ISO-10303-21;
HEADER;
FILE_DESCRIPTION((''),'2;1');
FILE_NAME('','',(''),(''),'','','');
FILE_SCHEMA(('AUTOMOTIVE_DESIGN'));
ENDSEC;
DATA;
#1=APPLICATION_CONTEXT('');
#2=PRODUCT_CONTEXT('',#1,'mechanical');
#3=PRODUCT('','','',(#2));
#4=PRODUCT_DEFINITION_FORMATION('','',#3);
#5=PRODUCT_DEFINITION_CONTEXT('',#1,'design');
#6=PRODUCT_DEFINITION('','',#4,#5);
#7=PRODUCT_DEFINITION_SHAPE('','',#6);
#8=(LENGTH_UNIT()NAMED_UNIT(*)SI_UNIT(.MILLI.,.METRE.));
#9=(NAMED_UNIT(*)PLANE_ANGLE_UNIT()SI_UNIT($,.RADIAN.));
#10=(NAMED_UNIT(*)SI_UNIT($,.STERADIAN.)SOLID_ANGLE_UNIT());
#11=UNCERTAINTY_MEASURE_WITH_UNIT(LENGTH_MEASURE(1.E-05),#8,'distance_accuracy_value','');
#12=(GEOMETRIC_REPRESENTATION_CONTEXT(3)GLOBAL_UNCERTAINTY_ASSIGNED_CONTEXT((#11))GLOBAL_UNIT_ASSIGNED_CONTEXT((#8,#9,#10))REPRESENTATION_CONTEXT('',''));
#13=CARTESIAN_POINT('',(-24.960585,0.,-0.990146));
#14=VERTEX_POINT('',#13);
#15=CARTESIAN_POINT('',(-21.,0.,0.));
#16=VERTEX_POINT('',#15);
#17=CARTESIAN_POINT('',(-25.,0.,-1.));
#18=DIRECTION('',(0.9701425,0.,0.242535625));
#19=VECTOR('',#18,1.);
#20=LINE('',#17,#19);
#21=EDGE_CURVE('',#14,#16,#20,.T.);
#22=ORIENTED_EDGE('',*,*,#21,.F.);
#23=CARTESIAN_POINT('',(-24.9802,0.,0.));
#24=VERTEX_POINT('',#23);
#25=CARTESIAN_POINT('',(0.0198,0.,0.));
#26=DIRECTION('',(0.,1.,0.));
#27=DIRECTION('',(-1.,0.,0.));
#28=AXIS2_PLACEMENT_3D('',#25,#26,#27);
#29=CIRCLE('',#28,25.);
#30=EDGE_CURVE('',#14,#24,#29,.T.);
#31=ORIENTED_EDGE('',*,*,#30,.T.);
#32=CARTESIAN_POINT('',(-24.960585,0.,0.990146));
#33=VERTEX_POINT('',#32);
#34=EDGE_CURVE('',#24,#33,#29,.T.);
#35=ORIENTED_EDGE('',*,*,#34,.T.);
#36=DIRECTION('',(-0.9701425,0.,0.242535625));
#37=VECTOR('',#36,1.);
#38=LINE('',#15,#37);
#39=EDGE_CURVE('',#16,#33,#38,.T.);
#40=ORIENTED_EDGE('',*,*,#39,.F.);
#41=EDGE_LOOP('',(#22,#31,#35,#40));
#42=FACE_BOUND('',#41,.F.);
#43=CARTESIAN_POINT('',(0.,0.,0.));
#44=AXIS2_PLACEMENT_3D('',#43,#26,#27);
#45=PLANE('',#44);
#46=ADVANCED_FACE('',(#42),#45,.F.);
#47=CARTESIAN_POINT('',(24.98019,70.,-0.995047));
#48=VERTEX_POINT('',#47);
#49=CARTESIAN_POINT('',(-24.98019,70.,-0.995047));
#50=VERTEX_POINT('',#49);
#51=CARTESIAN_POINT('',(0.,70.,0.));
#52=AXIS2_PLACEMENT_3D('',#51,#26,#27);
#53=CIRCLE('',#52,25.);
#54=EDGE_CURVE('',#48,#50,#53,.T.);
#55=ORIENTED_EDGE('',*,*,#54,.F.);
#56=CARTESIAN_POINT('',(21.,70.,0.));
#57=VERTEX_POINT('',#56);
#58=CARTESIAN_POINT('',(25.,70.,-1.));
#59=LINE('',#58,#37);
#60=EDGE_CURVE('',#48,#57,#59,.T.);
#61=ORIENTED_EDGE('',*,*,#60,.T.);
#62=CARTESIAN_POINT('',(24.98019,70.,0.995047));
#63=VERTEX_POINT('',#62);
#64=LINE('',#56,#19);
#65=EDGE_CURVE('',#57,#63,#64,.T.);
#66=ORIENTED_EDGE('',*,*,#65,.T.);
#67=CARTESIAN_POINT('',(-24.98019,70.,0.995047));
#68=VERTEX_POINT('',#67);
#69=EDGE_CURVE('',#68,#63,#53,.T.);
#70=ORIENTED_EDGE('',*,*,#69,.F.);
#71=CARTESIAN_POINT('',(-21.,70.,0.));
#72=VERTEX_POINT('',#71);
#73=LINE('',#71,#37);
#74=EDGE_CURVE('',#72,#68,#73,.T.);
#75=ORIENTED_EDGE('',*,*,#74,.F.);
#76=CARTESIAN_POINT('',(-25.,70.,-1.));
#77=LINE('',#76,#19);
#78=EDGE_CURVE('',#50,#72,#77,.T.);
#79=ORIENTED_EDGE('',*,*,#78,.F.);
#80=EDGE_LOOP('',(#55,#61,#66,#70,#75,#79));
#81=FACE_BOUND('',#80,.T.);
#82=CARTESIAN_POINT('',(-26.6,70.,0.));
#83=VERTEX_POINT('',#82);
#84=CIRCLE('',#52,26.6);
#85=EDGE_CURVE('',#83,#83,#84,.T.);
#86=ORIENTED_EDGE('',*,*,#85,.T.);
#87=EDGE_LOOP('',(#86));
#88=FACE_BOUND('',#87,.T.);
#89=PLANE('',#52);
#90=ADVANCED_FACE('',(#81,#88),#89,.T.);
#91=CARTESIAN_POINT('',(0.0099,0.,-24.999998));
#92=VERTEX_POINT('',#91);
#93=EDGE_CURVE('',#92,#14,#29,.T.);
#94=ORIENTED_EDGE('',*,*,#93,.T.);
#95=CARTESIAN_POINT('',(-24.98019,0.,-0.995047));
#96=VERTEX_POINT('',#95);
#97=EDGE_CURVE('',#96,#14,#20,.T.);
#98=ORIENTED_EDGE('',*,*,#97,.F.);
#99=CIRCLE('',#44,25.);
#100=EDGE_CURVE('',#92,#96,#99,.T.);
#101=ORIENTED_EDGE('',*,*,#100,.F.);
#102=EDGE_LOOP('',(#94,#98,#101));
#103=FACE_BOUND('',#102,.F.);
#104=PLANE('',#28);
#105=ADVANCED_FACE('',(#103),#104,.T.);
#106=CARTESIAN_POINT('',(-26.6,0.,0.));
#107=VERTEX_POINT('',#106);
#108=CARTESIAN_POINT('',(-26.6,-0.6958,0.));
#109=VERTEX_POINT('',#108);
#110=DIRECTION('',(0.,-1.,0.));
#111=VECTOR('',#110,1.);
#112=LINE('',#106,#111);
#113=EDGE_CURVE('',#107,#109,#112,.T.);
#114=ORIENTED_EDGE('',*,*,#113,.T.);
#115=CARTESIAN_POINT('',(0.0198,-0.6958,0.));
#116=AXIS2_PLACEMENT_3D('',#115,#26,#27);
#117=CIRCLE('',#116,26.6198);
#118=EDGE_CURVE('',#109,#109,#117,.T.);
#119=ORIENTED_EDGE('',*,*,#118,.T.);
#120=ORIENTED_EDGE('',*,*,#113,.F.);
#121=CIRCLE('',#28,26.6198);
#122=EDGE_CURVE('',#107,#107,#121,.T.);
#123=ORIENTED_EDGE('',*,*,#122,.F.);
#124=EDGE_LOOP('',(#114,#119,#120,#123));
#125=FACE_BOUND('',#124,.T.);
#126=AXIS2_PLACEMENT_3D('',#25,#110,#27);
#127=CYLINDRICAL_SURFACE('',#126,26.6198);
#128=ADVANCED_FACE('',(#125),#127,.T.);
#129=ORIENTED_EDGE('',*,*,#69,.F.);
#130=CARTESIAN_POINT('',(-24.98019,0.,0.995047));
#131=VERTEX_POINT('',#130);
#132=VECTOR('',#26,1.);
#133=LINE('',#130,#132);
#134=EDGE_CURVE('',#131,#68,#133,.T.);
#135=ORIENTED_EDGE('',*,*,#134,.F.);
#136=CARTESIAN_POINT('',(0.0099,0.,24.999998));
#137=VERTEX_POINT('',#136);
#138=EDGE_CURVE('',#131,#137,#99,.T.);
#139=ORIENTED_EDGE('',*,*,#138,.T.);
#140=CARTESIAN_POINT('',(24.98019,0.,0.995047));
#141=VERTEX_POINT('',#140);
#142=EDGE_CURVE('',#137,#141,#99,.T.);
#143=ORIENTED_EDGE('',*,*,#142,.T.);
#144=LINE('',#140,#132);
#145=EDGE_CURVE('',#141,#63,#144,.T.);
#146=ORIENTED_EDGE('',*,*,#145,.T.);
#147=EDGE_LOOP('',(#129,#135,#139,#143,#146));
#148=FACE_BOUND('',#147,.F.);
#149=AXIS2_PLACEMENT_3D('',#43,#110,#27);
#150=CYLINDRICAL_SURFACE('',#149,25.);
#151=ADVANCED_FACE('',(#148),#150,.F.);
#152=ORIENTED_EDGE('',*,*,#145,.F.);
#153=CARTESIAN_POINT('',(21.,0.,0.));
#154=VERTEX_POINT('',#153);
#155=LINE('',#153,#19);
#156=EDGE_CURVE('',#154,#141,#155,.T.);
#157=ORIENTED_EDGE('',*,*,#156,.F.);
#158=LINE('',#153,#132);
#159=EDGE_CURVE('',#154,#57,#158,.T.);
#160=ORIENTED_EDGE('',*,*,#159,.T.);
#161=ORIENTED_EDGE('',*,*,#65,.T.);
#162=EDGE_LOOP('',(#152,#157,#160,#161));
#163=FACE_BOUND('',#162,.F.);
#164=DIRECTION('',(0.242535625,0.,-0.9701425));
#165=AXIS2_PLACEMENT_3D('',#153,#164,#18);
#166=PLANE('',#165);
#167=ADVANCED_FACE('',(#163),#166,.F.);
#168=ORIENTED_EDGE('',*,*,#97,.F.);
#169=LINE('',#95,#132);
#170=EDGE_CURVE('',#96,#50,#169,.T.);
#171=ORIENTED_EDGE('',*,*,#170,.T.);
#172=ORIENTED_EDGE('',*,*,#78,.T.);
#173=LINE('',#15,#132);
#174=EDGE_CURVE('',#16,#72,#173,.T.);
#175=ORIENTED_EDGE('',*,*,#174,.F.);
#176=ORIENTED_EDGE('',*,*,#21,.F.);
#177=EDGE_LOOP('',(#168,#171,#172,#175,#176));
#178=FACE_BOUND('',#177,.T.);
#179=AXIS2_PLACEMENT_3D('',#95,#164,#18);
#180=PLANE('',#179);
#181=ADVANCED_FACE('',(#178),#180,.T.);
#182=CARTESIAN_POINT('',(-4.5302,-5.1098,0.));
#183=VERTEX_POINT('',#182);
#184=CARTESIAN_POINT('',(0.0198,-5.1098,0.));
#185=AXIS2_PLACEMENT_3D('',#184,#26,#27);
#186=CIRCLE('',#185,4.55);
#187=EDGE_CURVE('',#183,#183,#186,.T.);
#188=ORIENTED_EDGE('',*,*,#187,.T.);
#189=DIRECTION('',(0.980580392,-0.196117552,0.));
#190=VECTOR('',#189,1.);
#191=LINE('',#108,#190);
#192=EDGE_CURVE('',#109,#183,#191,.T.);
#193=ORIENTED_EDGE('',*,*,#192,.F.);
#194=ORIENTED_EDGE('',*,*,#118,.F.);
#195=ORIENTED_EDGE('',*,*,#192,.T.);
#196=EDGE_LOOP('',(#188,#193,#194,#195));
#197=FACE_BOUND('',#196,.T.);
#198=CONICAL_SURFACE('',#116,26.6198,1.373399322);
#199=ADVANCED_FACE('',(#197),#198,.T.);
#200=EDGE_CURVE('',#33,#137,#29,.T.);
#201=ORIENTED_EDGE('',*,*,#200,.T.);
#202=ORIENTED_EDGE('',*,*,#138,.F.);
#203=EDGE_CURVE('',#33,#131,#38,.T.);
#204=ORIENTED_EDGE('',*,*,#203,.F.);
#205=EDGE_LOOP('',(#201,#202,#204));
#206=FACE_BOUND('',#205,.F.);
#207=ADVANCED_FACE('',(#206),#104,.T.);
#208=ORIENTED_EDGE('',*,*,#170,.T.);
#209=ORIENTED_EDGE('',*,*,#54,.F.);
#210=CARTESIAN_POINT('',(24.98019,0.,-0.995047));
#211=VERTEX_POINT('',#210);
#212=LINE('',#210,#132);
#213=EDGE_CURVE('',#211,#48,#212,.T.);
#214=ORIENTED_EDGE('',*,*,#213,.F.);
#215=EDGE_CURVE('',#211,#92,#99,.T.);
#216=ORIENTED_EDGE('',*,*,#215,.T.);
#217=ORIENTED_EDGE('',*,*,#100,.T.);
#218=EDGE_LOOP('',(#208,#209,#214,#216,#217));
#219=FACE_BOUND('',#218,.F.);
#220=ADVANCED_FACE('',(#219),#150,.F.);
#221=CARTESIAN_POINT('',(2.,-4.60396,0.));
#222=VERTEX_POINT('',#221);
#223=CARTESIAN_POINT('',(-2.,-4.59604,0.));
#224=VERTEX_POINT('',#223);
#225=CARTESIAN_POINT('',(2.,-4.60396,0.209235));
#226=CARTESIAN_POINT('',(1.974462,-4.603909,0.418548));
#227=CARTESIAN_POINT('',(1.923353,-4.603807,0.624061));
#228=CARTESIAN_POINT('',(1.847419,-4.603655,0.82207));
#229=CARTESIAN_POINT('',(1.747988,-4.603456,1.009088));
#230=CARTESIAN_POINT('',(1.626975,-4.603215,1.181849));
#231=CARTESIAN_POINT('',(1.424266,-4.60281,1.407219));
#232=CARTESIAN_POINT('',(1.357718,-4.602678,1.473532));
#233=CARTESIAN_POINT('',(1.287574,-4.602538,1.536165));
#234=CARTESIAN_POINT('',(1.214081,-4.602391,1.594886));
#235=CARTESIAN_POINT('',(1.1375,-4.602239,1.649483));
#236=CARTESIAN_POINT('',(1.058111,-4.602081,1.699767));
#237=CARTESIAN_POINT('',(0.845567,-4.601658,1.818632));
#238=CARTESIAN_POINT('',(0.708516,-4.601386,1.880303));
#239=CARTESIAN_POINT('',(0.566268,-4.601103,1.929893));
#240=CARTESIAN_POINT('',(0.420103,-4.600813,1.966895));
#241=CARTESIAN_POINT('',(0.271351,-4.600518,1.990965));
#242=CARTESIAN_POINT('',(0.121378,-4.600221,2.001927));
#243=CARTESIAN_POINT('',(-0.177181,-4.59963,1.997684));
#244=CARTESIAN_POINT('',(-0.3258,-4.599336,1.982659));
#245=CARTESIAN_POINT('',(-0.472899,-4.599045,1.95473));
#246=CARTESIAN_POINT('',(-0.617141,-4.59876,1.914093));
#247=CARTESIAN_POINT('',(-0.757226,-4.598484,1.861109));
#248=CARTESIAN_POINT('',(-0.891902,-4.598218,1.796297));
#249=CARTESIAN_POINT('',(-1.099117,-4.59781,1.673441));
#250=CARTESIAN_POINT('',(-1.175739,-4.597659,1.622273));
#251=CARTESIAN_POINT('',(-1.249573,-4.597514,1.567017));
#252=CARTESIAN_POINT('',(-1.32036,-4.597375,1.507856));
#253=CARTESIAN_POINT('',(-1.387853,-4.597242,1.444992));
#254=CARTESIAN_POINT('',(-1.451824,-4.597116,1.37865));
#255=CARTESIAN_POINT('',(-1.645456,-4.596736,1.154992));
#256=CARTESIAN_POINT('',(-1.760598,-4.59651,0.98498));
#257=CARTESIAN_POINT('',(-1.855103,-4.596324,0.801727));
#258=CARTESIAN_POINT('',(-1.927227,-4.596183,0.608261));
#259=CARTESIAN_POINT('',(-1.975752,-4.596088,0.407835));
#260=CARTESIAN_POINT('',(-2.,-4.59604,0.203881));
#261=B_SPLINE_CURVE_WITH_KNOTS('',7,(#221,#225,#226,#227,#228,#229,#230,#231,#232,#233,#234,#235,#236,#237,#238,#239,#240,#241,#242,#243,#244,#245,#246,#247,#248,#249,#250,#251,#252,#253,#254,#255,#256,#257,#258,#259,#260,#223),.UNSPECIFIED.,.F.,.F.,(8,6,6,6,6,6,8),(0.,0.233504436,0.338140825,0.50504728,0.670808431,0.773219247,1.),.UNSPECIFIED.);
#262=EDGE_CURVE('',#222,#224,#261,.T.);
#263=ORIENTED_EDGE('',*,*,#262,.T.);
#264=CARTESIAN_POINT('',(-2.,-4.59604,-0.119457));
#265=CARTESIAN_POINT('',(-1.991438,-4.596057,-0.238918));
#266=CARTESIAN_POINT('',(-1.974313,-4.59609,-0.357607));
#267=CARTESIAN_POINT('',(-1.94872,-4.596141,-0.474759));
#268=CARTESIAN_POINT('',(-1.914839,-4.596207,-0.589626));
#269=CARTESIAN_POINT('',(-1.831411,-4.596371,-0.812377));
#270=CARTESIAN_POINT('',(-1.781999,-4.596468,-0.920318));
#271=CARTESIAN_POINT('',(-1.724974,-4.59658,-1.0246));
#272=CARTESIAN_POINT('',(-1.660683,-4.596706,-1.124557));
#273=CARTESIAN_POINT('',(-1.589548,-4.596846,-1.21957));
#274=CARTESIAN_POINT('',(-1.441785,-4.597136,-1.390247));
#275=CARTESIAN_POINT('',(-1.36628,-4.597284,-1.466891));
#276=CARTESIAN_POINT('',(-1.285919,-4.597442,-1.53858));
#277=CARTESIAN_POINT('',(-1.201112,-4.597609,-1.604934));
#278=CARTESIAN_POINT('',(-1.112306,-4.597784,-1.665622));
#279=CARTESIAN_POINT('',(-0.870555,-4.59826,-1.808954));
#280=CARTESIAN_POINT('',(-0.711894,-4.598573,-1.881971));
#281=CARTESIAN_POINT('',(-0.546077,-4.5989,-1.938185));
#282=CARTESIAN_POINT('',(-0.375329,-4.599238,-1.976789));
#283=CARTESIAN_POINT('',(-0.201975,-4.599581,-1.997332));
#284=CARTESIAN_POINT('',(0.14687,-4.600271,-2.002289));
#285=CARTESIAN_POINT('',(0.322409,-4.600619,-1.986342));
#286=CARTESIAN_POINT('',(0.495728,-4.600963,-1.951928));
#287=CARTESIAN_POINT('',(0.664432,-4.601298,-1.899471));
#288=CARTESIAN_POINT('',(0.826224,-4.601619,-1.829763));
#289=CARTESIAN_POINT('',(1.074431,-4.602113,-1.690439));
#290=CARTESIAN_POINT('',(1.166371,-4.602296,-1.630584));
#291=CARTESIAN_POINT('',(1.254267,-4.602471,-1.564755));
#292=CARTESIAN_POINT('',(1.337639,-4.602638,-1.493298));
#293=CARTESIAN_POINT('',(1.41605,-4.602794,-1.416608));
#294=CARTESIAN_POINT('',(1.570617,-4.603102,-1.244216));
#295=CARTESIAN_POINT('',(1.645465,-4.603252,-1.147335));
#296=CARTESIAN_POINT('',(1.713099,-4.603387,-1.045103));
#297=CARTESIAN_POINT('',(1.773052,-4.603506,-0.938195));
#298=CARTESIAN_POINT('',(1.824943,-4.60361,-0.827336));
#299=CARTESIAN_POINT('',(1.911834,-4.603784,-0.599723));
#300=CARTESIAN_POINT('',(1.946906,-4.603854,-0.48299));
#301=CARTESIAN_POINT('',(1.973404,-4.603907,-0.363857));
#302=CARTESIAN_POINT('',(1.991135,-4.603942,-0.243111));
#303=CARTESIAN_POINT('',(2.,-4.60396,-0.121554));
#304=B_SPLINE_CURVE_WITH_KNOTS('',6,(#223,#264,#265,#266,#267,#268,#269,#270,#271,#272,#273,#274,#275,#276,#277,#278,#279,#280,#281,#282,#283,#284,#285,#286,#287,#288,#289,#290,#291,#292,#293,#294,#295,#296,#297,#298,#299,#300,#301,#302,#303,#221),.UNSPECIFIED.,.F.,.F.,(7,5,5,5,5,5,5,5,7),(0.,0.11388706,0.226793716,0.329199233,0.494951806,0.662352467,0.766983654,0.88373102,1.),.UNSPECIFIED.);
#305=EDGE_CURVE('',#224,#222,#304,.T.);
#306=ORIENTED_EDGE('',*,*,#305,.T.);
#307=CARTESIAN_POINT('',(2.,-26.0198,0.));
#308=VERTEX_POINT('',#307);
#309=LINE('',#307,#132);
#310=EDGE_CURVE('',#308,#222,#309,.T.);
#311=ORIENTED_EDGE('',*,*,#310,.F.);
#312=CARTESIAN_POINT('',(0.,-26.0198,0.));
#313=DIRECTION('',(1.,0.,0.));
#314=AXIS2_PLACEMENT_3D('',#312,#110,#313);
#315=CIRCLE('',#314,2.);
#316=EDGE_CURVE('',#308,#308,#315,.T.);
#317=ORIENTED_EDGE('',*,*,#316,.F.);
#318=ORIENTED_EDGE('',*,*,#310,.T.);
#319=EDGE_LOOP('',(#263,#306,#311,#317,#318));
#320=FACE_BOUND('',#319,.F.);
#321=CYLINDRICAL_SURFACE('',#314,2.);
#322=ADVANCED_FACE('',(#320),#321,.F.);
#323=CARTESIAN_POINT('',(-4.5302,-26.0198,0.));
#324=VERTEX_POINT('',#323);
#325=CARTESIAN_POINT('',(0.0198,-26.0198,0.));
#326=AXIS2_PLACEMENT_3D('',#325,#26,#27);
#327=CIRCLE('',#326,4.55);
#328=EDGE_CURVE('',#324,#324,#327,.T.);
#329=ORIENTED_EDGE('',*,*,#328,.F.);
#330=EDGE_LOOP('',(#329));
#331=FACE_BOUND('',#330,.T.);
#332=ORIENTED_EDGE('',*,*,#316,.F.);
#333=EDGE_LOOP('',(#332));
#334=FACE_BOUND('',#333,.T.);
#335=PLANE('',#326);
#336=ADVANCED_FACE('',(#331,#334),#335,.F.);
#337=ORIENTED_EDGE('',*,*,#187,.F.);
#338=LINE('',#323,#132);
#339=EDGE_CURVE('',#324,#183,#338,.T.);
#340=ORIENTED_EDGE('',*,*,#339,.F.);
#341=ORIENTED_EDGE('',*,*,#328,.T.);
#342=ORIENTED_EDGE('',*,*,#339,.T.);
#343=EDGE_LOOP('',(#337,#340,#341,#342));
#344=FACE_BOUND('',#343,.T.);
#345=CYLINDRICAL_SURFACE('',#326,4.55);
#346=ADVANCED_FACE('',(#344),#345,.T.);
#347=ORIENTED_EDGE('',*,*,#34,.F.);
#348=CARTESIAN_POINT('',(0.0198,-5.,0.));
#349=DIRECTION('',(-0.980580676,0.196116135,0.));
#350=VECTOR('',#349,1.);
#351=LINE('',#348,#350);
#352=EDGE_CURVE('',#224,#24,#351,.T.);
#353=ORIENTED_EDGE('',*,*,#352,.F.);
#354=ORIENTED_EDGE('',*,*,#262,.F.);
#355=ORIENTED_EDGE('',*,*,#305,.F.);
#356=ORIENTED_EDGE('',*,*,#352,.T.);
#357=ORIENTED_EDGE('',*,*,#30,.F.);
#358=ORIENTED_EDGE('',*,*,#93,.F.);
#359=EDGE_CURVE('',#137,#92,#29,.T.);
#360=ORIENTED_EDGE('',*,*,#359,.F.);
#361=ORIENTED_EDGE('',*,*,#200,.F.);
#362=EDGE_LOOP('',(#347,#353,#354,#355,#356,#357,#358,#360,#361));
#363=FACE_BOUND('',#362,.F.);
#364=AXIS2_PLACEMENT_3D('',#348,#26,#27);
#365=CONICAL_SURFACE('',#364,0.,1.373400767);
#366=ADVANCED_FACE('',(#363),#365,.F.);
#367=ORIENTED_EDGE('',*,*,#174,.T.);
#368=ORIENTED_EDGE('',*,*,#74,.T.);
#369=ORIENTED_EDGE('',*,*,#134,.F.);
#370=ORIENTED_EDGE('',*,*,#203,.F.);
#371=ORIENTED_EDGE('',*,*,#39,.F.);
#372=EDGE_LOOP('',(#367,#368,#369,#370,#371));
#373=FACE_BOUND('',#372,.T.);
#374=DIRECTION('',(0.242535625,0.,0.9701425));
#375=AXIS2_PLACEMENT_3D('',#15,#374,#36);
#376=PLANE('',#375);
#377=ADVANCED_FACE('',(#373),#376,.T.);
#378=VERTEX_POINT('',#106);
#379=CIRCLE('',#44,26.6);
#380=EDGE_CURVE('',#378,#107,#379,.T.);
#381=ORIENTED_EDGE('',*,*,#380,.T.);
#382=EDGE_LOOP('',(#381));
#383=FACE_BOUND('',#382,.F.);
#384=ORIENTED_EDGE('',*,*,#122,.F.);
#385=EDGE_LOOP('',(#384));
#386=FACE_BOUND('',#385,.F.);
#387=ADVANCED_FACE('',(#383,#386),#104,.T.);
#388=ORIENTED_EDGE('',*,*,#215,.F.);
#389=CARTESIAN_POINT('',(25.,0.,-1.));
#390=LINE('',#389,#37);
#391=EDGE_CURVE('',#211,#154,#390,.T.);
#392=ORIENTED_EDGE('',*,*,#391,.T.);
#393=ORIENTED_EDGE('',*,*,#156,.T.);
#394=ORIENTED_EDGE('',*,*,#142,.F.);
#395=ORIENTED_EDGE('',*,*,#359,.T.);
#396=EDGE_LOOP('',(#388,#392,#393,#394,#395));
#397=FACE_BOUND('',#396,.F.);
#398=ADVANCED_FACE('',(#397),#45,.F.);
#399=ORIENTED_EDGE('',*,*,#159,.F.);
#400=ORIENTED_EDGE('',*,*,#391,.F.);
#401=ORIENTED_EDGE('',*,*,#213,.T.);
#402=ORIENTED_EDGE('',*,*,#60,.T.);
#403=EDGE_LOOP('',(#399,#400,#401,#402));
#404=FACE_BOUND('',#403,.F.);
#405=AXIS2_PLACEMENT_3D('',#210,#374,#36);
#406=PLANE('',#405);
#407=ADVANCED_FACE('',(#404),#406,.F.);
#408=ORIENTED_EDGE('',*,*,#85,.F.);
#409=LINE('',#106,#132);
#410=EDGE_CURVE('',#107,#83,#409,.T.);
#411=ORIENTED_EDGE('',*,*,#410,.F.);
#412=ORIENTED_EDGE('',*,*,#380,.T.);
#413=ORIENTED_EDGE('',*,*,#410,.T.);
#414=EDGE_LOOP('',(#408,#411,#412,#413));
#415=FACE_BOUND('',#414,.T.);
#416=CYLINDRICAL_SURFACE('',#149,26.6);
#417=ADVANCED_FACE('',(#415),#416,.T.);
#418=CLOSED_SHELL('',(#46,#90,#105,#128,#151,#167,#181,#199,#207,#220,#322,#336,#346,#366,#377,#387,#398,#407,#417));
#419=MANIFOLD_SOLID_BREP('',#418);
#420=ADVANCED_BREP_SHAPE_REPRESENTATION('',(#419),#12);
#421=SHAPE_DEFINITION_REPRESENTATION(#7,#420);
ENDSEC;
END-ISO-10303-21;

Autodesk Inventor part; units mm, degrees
ref_plane "YZ Plane" through (0, 0, 0) normal (1, 0, 0) x (0, 1, 0)
ref_plane "XZ Plane" through (0, 0, 0) normal (0, 1, 0) x (-1, 0, 0)
ref_plane "XY Plane" through (0, 0, 0) normal (0, 0, 1) x (1, 0, 0)
sketch "Sketch1" plane through (0, 0, 0) normal (0, 1, 0) x (-1, 0, 0)
  circle A0 centre (0, 0) radius 25
  circle A1 centre (0, 0) radius 26.6
  line L0 (25, 1) -> (25, 0)
  line L1 (25, 0) -> (25, -1)
  line L2 (25, -1) -> (21, 0)
  line L3 (21, 0) -> (25, 1)
  line L4 (-25, 0) -> (-25, -1)
  line L5 (-25, -1) -> (-21, 0)
  line L6 (-21, 0) -> (-25, 1)
  line L7 (-25, 1) -> (-25, 0)
  point P0 (24.9802, -0.995)
  point P1 (-24.9802, -0.995)
  point P2 (-24.9802, 0.995)
  point P3 (24.9802, 0.995)
  dimension "d0" = 50
  dimension "d1" = 4
  dimension "d2" = 1
  dimension "d3" = 1
  dimension "d4" = 1.6
  dimension "d5" = 1
  dimension "d6" = 1
  dimension "d7" = 4
extrude "Extrusion1" add sketch "Sketch1" along normal blind 70 contours A0 L2 L3 | L1 L2 A0 | A0 L3 L0 | L6 L5 A0 | A0 L7 L6 | L5 L4 A0 | A1
sketch "Sketch2" plane through (0, 0, 0) normal (0, 0, 1) x (1, 0, 0)
  line L0 (26.6, 0) -> (-26.6, 0) projected
  line L1 (0.0198, -6.0198) -> (0.0198, -5)
  line L2 (-24.9802, 0) -> (-21, 0) projected
  line L3 (0.0198, -5) -> (-24.9802, 0)
  line L4 (-24.9802, 0) -> (24.9802, 0) projected
  line L5 (-24.9802, 0) -> (-26.6, 0)
  line L6 (-26.6, 0) -> (-26.6, -0.6958)
  line L7 (-26.6, -0.6958) -> (0.0198, -6.0198)
  line L8 (0.0198, -6.0198) -> (0.0198, -26.0198)
  line L9 (0.0198, -26.0198) -> (-4.5302, -26.0198)
  line L10 (-4.5302, -26.0198) -> (-4.5302, -5.1098)
  point P0 (0, 0)
  dimension "d16" = 5
  dimension "d19" = 25
  dimension "d20" = 1
  dimension "d22" = 4.55
  dimension "d23" = 20
revolve "Revolution1" add sketch "Sketch2" angle 360 about axis through (0.0198, -6.0198, 0) along (0, 1, 0)
sketch "Sketch4" plane through (0.0198, -26.0198, 0) normal (0, -1, 0) x (1, 0, 0)
  circle A0 centre (-0.0198, 0) radius 2
  dimension "d24" = 4
extrude "Extrusion3" cut sketch "Sketch4" against normal through all
thread "Thread1" size "M10x1.5" class "6g" standard "ANSI Metric M Profile" length 9
properties part number "Reactor"
